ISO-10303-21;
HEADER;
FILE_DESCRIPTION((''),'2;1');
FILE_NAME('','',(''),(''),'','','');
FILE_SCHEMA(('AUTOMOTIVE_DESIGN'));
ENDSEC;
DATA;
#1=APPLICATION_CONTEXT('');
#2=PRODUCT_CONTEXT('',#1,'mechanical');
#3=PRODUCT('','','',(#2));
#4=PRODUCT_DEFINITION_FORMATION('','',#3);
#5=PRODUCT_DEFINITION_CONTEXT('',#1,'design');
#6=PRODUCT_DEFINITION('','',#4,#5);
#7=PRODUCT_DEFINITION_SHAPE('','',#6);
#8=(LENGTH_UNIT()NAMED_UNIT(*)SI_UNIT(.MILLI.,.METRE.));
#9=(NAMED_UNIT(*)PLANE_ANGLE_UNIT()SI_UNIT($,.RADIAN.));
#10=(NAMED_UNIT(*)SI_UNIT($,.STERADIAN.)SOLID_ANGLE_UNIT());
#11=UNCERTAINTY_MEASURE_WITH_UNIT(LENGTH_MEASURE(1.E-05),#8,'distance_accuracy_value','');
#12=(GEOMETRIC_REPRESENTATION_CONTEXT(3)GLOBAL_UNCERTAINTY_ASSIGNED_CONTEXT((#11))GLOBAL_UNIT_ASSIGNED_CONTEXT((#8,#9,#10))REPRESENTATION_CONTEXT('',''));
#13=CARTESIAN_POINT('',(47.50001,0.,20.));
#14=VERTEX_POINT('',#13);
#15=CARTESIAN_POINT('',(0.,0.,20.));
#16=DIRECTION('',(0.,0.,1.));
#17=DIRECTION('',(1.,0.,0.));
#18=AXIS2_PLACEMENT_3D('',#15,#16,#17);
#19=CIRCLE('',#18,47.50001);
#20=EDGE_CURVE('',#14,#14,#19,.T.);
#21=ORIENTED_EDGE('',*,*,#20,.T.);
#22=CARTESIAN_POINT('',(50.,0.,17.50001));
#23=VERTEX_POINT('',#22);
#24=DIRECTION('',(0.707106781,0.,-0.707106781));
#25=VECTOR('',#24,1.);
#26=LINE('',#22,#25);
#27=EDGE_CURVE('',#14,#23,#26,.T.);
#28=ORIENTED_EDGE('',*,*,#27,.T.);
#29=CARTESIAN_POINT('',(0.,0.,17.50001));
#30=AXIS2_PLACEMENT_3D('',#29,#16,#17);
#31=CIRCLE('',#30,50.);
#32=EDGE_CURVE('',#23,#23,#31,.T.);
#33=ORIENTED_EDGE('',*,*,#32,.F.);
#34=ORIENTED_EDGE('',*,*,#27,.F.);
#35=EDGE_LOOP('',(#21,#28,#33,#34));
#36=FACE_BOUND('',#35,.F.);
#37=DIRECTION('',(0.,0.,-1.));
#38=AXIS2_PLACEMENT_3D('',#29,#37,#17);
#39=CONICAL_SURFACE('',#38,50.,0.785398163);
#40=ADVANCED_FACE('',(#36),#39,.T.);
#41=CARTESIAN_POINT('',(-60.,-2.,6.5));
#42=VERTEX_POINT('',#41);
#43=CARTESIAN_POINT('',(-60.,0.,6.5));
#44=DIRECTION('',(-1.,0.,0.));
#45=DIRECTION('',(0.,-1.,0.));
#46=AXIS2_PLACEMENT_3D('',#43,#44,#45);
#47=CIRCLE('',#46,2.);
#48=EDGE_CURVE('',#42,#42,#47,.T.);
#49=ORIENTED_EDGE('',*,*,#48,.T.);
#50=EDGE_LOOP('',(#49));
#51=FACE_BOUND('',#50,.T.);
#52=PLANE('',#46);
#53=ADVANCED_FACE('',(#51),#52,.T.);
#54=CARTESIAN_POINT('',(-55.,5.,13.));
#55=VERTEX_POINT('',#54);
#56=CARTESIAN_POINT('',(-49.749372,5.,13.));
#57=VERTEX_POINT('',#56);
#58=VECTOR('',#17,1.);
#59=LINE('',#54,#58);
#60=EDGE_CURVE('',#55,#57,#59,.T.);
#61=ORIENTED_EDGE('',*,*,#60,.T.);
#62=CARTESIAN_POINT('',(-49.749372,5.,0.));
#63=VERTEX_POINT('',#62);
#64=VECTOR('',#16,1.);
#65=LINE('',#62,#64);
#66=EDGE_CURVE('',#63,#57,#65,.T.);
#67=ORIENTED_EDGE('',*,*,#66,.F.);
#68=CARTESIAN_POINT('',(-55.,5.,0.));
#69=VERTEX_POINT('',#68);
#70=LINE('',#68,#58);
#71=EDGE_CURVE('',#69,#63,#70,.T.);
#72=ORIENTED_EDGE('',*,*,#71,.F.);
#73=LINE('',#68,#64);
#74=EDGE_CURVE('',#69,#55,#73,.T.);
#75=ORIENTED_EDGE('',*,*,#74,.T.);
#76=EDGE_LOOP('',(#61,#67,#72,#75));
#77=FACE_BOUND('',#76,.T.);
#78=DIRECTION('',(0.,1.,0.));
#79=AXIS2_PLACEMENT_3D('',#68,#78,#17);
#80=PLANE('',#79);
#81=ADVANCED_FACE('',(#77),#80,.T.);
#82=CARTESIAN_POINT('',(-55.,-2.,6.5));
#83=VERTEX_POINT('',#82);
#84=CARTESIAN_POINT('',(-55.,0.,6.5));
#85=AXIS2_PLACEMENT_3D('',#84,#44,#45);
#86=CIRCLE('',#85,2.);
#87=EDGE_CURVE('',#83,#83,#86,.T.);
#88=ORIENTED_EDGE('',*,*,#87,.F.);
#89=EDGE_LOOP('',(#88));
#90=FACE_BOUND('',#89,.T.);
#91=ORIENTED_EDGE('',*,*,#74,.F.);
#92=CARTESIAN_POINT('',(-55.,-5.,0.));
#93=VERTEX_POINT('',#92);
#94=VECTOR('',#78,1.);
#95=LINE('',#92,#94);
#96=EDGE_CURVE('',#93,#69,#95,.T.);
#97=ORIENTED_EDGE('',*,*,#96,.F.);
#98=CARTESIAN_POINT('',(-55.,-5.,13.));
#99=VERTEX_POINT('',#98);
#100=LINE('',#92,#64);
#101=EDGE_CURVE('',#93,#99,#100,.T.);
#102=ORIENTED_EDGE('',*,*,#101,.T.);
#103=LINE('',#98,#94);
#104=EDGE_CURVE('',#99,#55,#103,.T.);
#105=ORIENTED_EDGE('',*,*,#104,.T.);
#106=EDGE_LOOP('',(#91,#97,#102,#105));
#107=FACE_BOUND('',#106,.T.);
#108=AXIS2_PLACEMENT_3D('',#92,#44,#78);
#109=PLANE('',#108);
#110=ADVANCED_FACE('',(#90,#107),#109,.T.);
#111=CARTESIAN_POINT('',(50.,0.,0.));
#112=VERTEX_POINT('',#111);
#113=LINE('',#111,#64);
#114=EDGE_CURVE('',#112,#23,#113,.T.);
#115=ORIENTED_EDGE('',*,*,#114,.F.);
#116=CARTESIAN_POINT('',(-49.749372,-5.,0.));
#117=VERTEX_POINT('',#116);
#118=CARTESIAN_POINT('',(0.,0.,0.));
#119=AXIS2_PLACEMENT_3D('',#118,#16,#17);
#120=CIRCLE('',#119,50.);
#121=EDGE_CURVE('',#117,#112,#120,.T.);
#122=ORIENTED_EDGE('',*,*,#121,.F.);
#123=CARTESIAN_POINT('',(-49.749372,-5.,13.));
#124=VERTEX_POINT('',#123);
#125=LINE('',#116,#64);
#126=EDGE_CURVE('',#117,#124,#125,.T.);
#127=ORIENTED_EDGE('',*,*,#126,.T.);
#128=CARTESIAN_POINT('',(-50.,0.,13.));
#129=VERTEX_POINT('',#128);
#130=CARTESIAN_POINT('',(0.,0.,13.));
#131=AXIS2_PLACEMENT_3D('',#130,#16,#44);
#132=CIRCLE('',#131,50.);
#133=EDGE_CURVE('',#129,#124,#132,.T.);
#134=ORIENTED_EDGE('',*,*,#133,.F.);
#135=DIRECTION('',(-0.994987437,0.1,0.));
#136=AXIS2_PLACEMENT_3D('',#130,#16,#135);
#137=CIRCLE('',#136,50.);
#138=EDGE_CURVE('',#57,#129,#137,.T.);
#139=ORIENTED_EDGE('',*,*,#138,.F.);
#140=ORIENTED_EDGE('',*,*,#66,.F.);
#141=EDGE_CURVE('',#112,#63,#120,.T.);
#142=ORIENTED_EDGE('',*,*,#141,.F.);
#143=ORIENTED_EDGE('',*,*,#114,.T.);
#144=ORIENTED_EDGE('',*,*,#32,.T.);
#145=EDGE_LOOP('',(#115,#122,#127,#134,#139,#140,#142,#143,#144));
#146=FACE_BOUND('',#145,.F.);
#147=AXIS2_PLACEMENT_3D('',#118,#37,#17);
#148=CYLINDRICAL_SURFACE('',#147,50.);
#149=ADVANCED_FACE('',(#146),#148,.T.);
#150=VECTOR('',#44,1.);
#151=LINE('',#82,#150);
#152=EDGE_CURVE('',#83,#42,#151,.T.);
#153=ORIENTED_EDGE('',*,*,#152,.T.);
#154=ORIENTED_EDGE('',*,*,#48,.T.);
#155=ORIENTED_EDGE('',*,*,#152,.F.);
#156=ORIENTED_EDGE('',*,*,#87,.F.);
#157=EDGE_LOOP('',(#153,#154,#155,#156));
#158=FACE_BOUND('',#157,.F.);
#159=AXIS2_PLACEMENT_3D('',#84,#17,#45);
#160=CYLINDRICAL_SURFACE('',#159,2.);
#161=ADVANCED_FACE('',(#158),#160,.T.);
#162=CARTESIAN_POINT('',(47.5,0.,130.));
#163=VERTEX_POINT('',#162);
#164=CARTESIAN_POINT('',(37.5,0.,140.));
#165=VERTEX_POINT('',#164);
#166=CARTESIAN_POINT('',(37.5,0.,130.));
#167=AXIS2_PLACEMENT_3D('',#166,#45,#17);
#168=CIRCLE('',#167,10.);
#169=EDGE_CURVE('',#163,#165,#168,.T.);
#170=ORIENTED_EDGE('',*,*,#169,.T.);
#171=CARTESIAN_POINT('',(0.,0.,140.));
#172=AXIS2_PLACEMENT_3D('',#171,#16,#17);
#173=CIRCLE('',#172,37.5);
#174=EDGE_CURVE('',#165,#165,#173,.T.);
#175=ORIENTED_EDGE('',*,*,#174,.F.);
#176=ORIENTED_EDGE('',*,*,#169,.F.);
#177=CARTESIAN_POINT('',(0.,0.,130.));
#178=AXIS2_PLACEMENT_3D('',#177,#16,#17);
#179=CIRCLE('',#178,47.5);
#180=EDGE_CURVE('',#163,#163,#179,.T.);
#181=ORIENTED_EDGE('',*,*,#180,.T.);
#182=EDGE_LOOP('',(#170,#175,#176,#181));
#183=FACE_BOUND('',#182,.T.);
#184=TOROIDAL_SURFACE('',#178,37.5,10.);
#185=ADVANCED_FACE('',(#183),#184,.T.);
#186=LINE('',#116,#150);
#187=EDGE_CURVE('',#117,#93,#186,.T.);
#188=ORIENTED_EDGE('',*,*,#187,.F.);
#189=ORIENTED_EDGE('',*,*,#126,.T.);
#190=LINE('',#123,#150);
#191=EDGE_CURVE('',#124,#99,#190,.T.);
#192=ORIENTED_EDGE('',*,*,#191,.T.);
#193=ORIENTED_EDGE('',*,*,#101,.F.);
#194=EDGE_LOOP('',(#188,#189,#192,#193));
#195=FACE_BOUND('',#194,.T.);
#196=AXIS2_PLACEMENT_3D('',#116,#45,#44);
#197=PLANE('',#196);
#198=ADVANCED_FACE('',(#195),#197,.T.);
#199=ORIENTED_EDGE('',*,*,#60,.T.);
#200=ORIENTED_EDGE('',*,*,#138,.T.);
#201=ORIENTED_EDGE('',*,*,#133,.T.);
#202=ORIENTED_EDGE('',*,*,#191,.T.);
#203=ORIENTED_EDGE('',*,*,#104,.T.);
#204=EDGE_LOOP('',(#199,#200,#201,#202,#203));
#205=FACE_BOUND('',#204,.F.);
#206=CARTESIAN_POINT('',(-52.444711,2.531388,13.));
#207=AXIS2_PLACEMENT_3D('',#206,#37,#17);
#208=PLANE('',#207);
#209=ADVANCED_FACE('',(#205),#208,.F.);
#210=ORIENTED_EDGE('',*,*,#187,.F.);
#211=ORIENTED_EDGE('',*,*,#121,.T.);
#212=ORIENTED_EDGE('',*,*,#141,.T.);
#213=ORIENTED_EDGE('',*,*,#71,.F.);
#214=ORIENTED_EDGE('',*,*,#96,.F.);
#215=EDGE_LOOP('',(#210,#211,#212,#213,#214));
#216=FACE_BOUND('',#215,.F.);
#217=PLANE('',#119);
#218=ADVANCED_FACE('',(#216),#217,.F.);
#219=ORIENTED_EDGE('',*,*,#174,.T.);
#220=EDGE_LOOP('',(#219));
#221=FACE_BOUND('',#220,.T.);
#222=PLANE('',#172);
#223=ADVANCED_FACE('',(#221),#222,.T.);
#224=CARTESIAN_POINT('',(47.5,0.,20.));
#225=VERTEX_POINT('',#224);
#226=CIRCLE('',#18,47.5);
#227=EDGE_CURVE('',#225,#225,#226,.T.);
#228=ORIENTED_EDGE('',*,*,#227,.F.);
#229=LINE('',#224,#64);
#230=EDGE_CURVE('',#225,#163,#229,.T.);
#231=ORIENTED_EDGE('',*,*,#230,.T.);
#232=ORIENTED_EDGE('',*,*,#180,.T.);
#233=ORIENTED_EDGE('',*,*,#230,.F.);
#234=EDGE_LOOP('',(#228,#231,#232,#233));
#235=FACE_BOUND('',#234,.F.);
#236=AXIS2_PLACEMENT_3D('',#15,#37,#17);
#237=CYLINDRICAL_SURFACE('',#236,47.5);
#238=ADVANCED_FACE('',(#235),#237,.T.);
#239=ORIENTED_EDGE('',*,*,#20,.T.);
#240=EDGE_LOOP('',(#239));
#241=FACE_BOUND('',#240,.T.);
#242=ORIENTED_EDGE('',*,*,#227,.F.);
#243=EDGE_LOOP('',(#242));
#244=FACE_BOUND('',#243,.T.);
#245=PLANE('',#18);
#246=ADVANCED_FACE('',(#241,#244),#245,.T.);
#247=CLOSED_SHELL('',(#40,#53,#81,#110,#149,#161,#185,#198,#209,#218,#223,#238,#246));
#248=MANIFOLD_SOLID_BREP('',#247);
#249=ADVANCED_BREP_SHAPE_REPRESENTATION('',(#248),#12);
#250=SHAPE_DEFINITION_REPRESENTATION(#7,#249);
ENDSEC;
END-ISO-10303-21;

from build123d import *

# Parameters (mm, degrees)
F0_R     = 50
F1_DEPTH = 20
F2_R     = 47.5
F3_DEPTH = 120
F4_R     = 10
F5_SIZE  = 2.49999
F7_DEPTH = 13
F8_R     = 2
F9_DEPTH = 5


# Not quite as in the source:
# - a fillet or chamfer is up to 0.001 mm smaller than in the source, because OpenCascade refuses the exact size


with BuildPart() as f1:
    # F0 (on Top) → F1 (new body)
    with BuildSketch(Plane.XY):
        Circle(F0_R)
    extrude(amount=F1_DEPTH)

    # F2 (on face) → F3 (join)
    with BuildSketch(Plane.XY.offset(20)):
        Circle(F2_R)
    extrude(amount=F3_DEPTH)

    # F4
    f4_edges = [f1.edges().sort_by_distance(p)[0] for p in [
        (-47.5, 0, 140),
    ]]
    fillet(f4_edges, radius=F4_R)

    # F5 (size 2.5 in the source; OpenCascade refuses exactly that, so slightly less here)
    f5_edges = [f1.edges().sort_by_distance(p)[0] for p in [
        (-50, 0, 20),
    ]]
    chamfer(f5_edges, length=F5_SIZE)

    # F6 (on face) → F7 (join)
    with BuildSketch(Plane(origin=(0, 0, 0), x_dir=(1, 0, 0), z_dir=(0, 0, -1))):
        with BuildLine():
            Line((-50, 0), (-55, 0))
            Line((-55, 0), (-55, -5))
            Line((-55, -5), (-49.7493718553, -5))
            ThreePointArc((-49.7493718553, -5), (-49.9373036555, -2.503138753), (-50, 0))
        make_face()
        with BuildLine():
            Line((-55, 5), (-55, 0))
            Line((-55, 0), (-50, 0))
            ThreePointArc((-50, 0), (-49.9373036555, 2.503138753), (-49.7493718553, 5))
            Line((-49.7493718553, 5), (-55, 5))
        make_face()
    extrude(amount=-F7_DEPTH)

    # F8 (on face) → F9 (join)
    with BuildSketch(Plane(origin=(-55, 0, 0), x_dir=(0, -1, 0), z_dir=(-1, 0, 0))):
        with Locations((0, 6.5)):
            Circle(F8_R)
    extrude(amount=F9_DEPTH)


solid = f1.part
